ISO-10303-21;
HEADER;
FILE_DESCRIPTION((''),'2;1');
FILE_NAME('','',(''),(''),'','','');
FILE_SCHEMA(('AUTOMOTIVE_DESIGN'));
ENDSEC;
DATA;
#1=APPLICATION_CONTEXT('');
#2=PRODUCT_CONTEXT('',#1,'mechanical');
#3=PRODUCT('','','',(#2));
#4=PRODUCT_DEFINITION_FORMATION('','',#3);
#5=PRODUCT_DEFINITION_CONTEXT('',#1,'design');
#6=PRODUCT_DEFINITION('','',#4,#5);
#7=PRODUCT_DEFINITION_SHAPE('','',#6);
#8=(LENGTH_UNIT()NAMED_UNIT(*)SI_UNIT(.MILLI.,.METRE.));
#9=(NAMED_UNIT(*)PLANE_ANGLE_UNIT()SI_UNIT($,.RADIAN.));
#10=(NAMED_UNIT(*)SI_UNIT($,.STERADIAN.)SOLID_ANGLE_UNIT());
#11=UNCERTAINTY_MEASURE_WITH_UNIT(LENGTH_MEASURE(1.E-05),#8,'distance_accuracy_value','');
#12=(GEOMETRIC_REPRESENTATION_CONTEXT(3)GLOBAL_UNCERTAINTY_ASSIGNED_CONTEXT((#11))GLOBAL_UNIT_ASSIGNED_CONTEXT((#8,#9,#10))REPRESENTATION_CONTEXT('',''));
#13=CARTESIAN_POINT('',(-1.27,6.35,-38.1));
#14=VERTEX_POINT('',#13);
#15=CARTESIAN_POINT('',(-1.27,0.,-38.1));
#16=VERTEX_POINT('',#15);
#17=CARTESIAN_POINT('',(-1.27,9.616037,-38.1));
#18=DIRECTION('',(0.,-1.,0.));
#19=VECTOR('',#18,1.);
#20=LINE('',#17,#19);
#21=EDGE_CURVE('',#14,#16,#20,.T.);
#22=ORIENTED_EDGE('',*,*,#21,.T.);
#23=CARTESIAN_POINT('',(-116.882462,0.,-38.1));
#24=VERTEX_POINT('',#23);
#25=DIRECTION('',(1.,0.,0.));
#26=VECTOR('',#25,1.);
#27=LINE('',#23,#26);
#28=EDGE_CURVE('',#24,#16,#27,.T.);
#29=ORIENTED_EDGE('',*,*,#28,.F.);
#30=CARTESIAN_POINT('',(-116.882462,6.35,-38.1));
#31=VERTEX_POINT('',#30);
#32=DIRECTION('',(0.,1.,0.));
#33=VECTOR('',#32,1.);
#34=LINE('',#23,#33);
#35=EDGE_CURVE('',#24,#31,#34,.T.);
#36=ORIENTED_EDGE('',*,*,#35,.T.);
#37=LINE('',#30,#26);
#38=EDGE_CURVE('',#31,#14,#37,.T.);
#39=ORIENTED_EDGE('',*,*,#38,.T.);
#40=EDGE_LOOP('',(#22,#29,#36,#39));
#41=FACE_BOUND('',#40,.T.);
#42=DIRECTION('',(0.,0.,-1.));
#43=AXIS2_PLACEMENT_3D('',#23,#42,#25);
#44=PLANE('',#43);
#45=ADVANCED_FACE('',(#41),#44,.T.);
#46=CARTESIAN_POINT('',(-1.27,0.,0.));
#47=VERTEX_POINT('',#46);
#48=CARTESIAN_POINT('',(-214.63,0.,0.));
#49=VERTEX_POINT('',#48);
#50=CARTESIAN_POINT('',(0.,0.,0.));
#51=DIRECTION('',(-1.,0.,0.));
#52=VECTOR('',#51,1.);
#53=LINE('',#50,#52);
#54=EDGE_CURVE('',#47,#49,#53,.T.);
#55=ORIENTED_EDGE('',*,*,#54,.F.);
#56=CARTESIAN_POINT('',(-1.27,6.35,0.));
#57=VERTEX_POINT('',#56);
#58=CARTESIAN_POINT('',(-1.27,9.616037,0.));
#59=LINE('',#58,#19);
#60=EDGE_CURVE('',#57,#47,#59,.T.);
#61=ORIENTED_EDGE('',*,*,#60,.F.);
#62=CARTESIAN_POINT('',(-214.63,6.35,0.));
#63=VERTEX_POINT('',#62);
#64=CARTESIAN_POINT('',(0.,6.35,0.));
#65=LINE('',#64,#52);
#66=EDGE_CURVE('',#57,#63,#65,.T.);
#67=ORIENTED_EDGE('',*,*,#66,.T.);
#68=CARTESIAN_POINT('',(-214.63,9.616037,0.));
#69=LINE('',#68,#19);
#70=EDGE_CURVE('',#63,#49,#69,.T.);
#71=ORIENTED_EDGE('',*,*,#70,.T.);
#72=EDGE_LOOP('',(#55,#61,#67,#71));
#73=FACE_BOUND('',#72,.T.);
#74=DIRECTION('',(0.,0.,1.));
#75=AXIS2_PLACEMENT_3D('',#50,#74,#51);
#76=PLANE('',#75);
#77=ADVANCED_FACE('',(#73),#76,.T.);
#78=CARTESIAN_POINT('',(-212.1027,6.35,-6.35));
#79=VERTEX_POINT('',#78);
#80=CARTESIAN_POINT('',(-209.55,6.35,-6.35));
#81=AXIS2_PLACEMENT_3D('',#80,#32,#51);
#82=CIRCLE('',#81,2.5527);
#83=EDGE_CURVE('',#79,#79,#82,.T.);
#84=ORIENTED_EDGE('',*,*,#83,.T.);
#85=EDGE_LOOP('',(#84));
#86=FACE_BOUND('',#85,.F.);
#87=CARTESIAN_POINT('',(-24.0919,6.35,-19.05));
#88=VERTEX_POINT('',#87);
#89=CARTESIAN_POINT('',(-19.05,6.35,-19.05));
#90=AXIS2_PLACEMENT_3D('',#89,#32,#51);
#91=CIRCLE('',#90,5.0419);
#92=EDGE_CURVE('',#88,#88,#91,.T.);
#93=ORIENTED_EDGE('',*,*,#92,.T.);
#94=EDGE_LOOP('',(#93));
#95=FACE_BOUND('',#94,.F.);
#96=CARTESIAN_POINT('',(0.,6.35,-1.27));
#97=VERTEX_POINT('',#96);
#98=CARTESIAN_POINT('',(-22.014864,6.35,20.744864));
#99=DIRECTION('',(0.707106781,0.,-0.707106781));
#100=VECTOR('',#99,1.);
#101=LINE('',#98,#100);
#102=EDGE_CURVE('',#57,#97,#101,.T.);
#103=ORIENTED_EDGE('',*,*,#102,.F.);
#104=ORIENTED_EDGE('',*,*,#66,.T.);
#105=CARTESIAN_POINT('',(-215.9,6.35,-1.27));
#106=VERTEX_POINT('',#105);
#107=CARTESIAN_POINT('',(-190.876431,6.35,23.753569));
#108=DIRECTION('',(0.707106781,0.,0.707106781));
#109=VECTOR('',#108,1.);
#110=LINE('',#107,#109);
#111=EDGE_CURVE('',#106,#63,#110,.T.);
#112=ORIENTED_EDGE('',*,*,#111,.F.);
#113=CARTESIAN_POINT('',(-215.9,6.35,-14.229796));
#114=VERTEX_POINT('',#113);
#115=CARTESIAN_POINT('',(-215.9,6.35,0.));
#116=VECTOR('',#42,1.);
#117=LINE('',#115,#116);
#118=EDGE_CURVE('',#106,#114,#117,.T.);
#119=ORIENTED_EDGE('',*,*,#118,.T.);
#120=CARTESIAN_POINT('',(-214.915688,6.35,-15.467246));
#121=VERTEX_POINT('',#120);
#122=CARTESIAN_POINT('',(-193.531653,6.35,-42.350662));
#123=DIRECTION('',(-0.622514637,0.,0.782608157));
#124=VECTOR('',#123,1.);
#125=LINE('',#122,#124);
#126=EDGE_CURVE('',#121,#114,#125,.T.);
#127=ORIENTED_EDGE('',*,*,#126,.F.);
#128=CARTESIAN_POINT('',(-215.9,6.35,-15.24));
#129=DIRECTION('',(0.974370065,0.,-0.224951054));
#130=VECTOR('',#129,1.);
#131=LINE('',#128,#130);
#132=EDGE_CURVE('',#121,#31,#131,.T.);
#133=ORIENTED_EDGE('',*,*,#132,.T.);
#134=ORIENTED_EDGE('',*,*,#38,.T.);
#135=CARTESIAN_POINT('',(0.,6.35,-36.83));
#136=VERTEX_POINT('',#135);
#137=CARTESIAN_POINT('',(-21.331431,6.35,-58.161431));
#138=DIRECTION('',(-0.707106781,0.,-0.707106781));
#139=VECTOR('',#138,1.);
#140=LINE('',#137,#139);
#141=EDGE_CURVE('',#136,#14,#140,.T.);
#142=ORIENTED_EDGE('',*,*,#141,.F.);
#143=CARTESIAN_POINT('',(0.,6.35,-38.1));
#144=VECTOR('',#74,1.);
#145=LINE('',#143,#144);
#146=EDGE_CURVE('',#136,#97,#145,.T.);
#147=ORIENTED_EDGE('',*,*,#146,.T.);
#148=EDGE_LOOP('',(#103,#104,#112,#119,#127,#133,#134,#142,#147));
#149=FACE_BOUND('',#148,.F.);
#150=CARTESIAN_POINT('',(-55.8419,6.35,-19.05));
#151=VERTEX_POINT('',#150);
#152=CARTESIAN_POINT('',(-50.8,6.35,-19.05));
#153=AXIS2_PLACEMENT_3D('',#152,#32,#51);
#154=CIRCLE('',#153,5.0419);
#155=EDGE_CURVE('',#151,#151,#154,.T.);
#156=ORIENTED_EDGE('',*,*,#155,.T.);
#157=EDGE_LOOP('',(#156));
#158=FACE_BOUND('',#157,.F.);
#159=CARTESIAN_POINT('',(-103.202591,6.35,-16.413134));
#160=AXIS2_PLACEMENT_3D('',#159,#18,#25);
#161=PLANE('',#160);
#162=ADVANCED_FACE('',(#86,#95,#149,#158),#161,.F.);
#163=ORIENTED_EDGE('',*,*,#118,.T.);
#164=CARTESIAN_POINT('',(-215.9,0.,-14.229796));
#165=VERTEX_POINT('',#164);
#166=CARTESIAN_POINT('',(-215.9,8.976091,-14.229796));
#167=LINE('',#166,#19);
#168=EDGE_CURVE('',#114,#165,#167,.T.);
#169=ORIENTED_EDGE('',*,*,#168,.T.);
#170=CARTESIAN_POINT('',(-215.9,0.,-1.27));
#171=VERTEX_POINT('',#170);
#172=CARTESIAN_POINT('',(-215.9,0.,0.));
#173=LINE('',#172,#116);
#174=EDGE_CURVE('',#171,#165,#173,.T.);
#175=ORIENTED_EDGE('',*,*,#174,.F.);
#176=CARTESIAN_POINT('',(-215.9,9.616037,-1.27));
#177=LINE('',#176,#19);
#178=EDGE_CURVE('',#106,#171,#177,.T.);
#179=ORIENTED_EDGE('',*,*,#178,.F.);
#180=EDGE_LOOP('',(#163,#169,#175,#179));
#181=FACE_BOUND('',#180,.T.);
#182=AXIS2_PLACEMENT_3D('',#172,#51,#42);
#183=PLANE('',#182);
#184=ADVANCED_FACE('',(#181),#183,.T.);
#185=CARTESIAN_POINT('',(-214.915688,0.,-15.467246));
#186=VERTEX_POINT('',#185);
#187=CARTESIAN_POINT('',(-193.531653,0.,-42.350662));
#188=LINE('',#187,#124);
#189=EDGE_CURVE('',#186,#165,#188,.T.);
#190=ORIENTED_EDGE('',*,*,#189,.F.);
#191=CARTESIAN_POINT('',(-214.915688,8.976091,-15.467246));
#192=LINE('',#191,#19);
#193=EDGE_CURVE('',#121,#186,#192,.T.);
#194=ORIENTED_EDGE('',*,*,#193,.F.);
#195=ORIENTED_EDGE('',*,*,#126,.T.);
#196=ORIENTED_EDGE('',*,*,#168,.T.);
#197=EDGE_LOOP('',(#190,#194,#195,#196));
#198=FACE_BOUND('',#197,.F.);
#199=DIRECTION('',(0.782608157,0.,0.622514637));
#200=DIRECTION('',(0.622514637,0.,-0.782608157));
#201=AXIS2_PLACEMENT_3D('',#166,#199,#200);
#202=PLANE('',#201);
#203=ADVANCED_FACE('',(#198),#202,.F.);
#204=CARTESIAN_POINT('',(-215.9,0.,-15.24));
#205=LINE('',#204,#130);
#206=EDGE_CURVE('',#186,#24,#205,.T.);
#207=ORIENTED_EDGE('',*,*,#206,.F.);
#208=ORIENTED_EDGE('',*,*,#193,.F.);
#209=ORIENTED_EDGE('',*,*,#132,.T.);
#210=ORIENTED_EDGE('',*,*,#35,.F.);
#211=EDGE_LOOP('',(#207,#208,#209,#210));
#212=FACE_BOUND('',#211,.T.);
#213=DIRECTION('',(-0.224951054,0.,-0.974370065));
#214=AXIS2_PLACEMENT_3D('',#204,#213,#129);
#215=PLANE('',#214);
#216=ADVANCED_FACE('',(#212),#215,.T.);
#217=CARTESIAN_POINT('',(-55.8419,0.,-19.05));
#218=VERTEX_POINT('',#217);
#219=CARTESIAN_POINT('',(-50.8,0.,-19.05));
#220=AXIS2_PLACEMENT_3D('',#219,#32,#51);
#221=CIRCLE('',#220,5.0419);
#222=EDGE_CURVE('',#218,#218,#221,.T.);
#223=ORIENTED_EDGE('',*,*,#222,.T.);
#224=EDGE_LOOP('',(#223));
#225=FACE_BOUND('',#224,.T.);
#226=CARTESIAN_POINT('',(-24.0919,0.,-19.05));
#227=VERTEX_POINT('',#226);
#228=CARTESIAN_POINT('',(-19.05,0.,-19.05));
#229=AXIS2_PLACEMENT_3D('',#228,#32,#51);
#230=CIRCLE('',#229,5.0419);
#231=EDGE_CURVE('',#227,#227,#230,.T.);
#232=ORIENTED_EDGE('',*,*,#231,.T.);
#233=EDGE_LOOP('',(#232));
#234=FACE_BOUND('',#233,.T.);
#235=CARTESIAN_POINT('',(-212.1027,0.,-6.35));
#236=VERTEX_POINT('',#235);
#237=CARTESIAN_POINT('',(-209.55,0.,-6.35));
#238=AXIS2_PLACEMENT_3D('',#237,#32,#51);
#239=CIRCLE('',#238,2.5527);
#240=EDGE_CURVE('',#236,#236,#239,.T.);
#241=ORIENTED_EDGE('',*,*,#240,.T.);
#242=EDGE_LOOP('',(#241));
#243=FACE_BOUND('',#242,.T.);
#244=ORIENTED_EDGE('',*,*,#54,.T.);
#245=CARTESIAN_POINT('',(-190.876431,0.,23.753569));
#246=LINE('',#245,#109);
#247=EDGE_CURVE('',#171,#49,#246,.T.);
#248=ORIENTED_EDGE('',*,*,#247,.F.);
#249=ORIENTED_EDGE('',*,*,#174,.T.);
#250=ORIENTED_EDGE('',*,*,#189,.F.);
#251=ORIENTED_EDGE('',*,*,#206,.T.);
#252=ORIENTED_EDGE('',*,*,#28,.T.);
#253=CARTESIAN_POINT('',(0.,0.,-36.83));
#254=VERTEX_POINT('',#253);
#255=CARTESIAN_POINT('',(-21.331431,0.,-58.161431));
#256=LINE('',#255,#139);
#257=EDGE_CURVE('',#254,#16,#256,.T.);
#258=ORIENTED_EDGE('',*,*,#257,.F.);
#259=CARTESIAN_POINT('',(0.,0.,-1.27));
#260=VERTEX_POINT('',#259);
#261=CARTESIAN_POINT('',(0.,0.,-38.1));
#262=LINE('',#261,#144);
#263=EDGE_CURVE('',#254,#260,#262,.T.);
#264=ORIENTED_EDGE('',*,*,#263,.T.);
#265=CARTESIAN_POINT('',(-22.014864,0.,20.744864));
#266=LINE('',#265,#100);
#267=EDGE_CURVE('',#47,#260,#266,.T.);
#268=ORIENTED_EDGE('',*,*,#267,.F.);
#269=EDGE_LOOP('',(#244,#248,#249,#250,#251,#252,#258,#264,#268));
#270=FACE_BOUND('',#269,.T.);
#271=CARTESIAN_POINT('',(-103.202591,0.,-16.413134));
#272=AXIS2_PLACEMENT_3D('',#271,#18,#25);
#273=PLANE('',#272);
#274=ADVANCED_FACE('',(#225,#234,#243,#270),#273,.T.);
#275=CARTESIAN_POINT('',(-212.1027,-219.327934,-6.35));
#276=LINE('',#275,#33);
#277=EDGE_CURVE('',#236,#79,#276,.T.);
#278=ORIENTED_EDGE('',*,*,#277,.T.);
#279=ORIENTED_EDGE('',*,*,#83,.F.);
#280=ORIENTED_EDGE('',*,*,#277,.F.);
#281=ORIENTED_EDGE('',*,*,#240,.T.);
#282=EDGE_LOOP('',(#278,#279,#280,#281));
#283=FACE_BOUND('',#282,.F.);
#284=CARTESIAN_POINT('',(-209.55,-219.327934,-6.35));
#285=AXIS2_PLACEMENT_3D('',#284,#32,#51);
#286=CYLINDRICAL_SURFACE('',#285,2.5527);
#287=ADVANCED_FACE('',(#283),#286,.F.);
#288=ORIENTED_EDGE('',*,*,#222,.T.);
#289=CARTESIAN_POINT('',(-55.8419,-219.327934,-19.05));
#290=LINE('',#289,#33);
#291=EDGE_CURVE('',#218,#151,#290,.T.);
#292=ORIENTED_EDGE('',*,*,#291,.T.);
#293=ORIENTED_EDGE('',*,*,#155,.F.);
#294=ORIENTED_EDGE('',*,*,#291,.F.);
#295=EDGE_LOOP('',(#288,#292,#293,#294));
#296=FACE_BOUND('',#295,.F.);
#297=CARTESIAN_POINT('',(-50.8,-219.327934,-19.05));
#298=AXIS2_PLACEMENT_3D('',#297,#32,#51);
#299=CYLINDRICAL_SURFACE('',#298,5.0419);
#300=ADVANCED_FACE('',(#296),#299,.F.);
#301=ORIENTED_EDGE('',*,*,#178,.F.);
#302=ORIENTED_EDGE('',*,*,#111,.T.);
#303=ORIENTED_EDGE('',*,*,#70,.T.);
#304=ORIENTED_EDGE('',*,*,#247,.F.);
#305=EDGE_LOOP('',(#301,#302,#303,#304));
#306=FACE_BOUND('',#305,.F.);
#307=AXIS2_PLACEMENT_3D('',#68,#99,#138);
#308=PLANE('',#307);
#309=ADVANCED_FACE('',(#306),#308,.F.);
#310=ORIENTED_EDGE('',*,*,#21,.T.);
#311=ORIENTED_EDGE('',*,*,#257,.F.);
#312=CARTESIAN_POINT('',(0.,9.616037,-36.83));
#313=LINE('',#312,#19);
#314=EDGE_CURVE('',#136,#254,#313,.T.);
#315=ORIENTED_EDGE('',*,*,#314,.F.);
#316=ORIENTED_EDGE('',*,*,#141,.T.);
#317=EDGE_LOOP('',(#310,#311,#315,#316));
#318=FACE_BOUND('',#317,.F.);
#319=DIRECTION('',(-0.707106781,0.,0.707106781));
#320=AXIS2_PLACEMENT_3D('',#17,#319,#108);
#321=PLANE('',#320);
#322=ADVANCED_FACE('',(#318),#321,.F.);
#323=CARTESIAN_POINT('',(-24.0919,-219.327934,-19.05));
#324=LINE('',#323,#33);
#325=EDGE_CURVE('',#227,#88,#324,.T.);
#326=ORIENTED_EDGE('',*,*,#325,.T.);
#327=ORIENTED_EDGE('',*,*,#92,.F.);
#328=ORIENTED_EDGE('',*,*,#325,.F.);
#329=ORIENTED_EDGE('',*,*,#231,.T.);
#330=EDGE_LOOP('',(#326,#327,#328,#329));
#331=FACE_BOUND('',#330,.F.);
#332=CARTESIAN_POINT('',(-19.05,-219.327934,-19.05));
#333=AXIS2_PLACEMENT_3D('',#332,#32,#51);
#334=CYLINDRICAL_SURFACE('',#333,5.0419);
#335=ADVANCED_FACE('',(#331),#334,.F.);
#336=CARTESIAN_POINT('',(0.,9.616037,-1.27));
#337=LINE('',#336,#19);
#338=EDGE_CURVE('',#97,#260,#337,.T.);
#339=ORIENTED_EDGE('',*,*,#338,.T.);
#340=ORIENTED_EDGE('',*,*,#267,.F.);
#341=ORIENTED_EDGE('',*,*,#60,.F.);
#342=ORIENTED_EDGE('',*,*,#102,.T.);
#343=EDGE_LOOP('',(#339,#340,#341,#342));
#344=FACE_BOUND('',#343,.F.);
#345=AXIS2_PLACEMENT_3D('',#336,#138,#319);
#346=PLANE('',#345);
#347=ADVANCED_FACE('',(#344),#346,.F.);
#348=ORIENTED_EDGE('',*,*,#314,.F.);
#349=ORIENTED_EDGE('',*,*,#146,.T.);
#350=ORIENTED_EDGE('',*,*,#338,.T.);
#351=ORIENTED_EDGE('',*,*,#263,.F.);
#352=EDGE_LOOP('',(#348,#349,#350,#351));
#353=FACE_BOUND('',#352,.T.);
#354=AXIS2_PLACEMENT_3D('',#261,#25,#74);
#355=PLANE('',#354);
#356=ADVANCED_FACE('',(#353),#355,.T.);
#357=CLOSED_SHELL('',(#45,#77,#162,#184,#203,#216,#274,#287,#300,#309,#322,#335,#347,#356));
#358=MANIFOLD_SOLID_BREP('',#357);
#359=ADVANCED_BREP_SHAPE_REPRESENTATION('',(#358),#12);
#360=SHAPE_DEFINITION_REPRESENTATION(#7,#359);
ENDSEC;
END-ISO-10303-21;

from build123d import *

# Parameters (mm, degrees)
F1_DEPTH    = 6.35
F2_T1_DEPTH = 12.8820747894
F2_T3_DEPTH = 11.6021811914
F4_D        = 10.0838
F6_D        = 5.1054


# Not quite as in the source:
# - a fillet or chamfer that OpenCascade refuses, or shapes differently, is made with other operations: its cross-section is extruded or revolved along the edge and cut away or added


with BuildPart() as f1:
    # F0 (on Front) → F1 (new body)
    with BuildSketch(Plane.XZ):
        Polygon((0, -38.1), (0, 0), (-215.9, 0), (-215.9, -15.24), (-116.8824615139, -38.1), align=None)
    extrude(amount=-F1_DEPTH)

    # F2: chamfer of 1.27 on 4 edges, made by hand

    # F2_s2 → F2_t1 (cut)
    with BuildSketch(Plane.XZ.offset(-9.6160373947)):
        Polygon((-214.63, 0), (-215.9, -1.27), (-215.9, 0), align=None)
        Polygon((-1.27, -38.1), (0, -36.83), (0, -38.1), align=None)
        Polygon((0, -1.27), (-1.27, 0), (0, 0), align=None)
    extrude(amount=F2_T1_DEPTH, mode=Mode.SUBTRACT)

    # F2_s4 → F2_t3 (cut)
    with BuildSketch(Plane.XZ.offset(-8.9760905957)):
        Polygon((-215.9, -14.2297963858), (-214.915687839, -15.4672463681), (-215.9, -15.24), align=None)
    extrude(amount=F2_T3_DEPTH, mode=Mode.SUBTRACT)

    # F4 (through all)
    with Locations(Plane.XZ):
        with Locations((-50.8, -19.05), (-19.05, -19.05)):
            Hole(F4_D / 2)

    # F6 (through all)
    with Locations(Plane.XZ):
        with Locations((-209.55, -6.35)):
            Hole(F6_D / 2)


solid = f1.part
